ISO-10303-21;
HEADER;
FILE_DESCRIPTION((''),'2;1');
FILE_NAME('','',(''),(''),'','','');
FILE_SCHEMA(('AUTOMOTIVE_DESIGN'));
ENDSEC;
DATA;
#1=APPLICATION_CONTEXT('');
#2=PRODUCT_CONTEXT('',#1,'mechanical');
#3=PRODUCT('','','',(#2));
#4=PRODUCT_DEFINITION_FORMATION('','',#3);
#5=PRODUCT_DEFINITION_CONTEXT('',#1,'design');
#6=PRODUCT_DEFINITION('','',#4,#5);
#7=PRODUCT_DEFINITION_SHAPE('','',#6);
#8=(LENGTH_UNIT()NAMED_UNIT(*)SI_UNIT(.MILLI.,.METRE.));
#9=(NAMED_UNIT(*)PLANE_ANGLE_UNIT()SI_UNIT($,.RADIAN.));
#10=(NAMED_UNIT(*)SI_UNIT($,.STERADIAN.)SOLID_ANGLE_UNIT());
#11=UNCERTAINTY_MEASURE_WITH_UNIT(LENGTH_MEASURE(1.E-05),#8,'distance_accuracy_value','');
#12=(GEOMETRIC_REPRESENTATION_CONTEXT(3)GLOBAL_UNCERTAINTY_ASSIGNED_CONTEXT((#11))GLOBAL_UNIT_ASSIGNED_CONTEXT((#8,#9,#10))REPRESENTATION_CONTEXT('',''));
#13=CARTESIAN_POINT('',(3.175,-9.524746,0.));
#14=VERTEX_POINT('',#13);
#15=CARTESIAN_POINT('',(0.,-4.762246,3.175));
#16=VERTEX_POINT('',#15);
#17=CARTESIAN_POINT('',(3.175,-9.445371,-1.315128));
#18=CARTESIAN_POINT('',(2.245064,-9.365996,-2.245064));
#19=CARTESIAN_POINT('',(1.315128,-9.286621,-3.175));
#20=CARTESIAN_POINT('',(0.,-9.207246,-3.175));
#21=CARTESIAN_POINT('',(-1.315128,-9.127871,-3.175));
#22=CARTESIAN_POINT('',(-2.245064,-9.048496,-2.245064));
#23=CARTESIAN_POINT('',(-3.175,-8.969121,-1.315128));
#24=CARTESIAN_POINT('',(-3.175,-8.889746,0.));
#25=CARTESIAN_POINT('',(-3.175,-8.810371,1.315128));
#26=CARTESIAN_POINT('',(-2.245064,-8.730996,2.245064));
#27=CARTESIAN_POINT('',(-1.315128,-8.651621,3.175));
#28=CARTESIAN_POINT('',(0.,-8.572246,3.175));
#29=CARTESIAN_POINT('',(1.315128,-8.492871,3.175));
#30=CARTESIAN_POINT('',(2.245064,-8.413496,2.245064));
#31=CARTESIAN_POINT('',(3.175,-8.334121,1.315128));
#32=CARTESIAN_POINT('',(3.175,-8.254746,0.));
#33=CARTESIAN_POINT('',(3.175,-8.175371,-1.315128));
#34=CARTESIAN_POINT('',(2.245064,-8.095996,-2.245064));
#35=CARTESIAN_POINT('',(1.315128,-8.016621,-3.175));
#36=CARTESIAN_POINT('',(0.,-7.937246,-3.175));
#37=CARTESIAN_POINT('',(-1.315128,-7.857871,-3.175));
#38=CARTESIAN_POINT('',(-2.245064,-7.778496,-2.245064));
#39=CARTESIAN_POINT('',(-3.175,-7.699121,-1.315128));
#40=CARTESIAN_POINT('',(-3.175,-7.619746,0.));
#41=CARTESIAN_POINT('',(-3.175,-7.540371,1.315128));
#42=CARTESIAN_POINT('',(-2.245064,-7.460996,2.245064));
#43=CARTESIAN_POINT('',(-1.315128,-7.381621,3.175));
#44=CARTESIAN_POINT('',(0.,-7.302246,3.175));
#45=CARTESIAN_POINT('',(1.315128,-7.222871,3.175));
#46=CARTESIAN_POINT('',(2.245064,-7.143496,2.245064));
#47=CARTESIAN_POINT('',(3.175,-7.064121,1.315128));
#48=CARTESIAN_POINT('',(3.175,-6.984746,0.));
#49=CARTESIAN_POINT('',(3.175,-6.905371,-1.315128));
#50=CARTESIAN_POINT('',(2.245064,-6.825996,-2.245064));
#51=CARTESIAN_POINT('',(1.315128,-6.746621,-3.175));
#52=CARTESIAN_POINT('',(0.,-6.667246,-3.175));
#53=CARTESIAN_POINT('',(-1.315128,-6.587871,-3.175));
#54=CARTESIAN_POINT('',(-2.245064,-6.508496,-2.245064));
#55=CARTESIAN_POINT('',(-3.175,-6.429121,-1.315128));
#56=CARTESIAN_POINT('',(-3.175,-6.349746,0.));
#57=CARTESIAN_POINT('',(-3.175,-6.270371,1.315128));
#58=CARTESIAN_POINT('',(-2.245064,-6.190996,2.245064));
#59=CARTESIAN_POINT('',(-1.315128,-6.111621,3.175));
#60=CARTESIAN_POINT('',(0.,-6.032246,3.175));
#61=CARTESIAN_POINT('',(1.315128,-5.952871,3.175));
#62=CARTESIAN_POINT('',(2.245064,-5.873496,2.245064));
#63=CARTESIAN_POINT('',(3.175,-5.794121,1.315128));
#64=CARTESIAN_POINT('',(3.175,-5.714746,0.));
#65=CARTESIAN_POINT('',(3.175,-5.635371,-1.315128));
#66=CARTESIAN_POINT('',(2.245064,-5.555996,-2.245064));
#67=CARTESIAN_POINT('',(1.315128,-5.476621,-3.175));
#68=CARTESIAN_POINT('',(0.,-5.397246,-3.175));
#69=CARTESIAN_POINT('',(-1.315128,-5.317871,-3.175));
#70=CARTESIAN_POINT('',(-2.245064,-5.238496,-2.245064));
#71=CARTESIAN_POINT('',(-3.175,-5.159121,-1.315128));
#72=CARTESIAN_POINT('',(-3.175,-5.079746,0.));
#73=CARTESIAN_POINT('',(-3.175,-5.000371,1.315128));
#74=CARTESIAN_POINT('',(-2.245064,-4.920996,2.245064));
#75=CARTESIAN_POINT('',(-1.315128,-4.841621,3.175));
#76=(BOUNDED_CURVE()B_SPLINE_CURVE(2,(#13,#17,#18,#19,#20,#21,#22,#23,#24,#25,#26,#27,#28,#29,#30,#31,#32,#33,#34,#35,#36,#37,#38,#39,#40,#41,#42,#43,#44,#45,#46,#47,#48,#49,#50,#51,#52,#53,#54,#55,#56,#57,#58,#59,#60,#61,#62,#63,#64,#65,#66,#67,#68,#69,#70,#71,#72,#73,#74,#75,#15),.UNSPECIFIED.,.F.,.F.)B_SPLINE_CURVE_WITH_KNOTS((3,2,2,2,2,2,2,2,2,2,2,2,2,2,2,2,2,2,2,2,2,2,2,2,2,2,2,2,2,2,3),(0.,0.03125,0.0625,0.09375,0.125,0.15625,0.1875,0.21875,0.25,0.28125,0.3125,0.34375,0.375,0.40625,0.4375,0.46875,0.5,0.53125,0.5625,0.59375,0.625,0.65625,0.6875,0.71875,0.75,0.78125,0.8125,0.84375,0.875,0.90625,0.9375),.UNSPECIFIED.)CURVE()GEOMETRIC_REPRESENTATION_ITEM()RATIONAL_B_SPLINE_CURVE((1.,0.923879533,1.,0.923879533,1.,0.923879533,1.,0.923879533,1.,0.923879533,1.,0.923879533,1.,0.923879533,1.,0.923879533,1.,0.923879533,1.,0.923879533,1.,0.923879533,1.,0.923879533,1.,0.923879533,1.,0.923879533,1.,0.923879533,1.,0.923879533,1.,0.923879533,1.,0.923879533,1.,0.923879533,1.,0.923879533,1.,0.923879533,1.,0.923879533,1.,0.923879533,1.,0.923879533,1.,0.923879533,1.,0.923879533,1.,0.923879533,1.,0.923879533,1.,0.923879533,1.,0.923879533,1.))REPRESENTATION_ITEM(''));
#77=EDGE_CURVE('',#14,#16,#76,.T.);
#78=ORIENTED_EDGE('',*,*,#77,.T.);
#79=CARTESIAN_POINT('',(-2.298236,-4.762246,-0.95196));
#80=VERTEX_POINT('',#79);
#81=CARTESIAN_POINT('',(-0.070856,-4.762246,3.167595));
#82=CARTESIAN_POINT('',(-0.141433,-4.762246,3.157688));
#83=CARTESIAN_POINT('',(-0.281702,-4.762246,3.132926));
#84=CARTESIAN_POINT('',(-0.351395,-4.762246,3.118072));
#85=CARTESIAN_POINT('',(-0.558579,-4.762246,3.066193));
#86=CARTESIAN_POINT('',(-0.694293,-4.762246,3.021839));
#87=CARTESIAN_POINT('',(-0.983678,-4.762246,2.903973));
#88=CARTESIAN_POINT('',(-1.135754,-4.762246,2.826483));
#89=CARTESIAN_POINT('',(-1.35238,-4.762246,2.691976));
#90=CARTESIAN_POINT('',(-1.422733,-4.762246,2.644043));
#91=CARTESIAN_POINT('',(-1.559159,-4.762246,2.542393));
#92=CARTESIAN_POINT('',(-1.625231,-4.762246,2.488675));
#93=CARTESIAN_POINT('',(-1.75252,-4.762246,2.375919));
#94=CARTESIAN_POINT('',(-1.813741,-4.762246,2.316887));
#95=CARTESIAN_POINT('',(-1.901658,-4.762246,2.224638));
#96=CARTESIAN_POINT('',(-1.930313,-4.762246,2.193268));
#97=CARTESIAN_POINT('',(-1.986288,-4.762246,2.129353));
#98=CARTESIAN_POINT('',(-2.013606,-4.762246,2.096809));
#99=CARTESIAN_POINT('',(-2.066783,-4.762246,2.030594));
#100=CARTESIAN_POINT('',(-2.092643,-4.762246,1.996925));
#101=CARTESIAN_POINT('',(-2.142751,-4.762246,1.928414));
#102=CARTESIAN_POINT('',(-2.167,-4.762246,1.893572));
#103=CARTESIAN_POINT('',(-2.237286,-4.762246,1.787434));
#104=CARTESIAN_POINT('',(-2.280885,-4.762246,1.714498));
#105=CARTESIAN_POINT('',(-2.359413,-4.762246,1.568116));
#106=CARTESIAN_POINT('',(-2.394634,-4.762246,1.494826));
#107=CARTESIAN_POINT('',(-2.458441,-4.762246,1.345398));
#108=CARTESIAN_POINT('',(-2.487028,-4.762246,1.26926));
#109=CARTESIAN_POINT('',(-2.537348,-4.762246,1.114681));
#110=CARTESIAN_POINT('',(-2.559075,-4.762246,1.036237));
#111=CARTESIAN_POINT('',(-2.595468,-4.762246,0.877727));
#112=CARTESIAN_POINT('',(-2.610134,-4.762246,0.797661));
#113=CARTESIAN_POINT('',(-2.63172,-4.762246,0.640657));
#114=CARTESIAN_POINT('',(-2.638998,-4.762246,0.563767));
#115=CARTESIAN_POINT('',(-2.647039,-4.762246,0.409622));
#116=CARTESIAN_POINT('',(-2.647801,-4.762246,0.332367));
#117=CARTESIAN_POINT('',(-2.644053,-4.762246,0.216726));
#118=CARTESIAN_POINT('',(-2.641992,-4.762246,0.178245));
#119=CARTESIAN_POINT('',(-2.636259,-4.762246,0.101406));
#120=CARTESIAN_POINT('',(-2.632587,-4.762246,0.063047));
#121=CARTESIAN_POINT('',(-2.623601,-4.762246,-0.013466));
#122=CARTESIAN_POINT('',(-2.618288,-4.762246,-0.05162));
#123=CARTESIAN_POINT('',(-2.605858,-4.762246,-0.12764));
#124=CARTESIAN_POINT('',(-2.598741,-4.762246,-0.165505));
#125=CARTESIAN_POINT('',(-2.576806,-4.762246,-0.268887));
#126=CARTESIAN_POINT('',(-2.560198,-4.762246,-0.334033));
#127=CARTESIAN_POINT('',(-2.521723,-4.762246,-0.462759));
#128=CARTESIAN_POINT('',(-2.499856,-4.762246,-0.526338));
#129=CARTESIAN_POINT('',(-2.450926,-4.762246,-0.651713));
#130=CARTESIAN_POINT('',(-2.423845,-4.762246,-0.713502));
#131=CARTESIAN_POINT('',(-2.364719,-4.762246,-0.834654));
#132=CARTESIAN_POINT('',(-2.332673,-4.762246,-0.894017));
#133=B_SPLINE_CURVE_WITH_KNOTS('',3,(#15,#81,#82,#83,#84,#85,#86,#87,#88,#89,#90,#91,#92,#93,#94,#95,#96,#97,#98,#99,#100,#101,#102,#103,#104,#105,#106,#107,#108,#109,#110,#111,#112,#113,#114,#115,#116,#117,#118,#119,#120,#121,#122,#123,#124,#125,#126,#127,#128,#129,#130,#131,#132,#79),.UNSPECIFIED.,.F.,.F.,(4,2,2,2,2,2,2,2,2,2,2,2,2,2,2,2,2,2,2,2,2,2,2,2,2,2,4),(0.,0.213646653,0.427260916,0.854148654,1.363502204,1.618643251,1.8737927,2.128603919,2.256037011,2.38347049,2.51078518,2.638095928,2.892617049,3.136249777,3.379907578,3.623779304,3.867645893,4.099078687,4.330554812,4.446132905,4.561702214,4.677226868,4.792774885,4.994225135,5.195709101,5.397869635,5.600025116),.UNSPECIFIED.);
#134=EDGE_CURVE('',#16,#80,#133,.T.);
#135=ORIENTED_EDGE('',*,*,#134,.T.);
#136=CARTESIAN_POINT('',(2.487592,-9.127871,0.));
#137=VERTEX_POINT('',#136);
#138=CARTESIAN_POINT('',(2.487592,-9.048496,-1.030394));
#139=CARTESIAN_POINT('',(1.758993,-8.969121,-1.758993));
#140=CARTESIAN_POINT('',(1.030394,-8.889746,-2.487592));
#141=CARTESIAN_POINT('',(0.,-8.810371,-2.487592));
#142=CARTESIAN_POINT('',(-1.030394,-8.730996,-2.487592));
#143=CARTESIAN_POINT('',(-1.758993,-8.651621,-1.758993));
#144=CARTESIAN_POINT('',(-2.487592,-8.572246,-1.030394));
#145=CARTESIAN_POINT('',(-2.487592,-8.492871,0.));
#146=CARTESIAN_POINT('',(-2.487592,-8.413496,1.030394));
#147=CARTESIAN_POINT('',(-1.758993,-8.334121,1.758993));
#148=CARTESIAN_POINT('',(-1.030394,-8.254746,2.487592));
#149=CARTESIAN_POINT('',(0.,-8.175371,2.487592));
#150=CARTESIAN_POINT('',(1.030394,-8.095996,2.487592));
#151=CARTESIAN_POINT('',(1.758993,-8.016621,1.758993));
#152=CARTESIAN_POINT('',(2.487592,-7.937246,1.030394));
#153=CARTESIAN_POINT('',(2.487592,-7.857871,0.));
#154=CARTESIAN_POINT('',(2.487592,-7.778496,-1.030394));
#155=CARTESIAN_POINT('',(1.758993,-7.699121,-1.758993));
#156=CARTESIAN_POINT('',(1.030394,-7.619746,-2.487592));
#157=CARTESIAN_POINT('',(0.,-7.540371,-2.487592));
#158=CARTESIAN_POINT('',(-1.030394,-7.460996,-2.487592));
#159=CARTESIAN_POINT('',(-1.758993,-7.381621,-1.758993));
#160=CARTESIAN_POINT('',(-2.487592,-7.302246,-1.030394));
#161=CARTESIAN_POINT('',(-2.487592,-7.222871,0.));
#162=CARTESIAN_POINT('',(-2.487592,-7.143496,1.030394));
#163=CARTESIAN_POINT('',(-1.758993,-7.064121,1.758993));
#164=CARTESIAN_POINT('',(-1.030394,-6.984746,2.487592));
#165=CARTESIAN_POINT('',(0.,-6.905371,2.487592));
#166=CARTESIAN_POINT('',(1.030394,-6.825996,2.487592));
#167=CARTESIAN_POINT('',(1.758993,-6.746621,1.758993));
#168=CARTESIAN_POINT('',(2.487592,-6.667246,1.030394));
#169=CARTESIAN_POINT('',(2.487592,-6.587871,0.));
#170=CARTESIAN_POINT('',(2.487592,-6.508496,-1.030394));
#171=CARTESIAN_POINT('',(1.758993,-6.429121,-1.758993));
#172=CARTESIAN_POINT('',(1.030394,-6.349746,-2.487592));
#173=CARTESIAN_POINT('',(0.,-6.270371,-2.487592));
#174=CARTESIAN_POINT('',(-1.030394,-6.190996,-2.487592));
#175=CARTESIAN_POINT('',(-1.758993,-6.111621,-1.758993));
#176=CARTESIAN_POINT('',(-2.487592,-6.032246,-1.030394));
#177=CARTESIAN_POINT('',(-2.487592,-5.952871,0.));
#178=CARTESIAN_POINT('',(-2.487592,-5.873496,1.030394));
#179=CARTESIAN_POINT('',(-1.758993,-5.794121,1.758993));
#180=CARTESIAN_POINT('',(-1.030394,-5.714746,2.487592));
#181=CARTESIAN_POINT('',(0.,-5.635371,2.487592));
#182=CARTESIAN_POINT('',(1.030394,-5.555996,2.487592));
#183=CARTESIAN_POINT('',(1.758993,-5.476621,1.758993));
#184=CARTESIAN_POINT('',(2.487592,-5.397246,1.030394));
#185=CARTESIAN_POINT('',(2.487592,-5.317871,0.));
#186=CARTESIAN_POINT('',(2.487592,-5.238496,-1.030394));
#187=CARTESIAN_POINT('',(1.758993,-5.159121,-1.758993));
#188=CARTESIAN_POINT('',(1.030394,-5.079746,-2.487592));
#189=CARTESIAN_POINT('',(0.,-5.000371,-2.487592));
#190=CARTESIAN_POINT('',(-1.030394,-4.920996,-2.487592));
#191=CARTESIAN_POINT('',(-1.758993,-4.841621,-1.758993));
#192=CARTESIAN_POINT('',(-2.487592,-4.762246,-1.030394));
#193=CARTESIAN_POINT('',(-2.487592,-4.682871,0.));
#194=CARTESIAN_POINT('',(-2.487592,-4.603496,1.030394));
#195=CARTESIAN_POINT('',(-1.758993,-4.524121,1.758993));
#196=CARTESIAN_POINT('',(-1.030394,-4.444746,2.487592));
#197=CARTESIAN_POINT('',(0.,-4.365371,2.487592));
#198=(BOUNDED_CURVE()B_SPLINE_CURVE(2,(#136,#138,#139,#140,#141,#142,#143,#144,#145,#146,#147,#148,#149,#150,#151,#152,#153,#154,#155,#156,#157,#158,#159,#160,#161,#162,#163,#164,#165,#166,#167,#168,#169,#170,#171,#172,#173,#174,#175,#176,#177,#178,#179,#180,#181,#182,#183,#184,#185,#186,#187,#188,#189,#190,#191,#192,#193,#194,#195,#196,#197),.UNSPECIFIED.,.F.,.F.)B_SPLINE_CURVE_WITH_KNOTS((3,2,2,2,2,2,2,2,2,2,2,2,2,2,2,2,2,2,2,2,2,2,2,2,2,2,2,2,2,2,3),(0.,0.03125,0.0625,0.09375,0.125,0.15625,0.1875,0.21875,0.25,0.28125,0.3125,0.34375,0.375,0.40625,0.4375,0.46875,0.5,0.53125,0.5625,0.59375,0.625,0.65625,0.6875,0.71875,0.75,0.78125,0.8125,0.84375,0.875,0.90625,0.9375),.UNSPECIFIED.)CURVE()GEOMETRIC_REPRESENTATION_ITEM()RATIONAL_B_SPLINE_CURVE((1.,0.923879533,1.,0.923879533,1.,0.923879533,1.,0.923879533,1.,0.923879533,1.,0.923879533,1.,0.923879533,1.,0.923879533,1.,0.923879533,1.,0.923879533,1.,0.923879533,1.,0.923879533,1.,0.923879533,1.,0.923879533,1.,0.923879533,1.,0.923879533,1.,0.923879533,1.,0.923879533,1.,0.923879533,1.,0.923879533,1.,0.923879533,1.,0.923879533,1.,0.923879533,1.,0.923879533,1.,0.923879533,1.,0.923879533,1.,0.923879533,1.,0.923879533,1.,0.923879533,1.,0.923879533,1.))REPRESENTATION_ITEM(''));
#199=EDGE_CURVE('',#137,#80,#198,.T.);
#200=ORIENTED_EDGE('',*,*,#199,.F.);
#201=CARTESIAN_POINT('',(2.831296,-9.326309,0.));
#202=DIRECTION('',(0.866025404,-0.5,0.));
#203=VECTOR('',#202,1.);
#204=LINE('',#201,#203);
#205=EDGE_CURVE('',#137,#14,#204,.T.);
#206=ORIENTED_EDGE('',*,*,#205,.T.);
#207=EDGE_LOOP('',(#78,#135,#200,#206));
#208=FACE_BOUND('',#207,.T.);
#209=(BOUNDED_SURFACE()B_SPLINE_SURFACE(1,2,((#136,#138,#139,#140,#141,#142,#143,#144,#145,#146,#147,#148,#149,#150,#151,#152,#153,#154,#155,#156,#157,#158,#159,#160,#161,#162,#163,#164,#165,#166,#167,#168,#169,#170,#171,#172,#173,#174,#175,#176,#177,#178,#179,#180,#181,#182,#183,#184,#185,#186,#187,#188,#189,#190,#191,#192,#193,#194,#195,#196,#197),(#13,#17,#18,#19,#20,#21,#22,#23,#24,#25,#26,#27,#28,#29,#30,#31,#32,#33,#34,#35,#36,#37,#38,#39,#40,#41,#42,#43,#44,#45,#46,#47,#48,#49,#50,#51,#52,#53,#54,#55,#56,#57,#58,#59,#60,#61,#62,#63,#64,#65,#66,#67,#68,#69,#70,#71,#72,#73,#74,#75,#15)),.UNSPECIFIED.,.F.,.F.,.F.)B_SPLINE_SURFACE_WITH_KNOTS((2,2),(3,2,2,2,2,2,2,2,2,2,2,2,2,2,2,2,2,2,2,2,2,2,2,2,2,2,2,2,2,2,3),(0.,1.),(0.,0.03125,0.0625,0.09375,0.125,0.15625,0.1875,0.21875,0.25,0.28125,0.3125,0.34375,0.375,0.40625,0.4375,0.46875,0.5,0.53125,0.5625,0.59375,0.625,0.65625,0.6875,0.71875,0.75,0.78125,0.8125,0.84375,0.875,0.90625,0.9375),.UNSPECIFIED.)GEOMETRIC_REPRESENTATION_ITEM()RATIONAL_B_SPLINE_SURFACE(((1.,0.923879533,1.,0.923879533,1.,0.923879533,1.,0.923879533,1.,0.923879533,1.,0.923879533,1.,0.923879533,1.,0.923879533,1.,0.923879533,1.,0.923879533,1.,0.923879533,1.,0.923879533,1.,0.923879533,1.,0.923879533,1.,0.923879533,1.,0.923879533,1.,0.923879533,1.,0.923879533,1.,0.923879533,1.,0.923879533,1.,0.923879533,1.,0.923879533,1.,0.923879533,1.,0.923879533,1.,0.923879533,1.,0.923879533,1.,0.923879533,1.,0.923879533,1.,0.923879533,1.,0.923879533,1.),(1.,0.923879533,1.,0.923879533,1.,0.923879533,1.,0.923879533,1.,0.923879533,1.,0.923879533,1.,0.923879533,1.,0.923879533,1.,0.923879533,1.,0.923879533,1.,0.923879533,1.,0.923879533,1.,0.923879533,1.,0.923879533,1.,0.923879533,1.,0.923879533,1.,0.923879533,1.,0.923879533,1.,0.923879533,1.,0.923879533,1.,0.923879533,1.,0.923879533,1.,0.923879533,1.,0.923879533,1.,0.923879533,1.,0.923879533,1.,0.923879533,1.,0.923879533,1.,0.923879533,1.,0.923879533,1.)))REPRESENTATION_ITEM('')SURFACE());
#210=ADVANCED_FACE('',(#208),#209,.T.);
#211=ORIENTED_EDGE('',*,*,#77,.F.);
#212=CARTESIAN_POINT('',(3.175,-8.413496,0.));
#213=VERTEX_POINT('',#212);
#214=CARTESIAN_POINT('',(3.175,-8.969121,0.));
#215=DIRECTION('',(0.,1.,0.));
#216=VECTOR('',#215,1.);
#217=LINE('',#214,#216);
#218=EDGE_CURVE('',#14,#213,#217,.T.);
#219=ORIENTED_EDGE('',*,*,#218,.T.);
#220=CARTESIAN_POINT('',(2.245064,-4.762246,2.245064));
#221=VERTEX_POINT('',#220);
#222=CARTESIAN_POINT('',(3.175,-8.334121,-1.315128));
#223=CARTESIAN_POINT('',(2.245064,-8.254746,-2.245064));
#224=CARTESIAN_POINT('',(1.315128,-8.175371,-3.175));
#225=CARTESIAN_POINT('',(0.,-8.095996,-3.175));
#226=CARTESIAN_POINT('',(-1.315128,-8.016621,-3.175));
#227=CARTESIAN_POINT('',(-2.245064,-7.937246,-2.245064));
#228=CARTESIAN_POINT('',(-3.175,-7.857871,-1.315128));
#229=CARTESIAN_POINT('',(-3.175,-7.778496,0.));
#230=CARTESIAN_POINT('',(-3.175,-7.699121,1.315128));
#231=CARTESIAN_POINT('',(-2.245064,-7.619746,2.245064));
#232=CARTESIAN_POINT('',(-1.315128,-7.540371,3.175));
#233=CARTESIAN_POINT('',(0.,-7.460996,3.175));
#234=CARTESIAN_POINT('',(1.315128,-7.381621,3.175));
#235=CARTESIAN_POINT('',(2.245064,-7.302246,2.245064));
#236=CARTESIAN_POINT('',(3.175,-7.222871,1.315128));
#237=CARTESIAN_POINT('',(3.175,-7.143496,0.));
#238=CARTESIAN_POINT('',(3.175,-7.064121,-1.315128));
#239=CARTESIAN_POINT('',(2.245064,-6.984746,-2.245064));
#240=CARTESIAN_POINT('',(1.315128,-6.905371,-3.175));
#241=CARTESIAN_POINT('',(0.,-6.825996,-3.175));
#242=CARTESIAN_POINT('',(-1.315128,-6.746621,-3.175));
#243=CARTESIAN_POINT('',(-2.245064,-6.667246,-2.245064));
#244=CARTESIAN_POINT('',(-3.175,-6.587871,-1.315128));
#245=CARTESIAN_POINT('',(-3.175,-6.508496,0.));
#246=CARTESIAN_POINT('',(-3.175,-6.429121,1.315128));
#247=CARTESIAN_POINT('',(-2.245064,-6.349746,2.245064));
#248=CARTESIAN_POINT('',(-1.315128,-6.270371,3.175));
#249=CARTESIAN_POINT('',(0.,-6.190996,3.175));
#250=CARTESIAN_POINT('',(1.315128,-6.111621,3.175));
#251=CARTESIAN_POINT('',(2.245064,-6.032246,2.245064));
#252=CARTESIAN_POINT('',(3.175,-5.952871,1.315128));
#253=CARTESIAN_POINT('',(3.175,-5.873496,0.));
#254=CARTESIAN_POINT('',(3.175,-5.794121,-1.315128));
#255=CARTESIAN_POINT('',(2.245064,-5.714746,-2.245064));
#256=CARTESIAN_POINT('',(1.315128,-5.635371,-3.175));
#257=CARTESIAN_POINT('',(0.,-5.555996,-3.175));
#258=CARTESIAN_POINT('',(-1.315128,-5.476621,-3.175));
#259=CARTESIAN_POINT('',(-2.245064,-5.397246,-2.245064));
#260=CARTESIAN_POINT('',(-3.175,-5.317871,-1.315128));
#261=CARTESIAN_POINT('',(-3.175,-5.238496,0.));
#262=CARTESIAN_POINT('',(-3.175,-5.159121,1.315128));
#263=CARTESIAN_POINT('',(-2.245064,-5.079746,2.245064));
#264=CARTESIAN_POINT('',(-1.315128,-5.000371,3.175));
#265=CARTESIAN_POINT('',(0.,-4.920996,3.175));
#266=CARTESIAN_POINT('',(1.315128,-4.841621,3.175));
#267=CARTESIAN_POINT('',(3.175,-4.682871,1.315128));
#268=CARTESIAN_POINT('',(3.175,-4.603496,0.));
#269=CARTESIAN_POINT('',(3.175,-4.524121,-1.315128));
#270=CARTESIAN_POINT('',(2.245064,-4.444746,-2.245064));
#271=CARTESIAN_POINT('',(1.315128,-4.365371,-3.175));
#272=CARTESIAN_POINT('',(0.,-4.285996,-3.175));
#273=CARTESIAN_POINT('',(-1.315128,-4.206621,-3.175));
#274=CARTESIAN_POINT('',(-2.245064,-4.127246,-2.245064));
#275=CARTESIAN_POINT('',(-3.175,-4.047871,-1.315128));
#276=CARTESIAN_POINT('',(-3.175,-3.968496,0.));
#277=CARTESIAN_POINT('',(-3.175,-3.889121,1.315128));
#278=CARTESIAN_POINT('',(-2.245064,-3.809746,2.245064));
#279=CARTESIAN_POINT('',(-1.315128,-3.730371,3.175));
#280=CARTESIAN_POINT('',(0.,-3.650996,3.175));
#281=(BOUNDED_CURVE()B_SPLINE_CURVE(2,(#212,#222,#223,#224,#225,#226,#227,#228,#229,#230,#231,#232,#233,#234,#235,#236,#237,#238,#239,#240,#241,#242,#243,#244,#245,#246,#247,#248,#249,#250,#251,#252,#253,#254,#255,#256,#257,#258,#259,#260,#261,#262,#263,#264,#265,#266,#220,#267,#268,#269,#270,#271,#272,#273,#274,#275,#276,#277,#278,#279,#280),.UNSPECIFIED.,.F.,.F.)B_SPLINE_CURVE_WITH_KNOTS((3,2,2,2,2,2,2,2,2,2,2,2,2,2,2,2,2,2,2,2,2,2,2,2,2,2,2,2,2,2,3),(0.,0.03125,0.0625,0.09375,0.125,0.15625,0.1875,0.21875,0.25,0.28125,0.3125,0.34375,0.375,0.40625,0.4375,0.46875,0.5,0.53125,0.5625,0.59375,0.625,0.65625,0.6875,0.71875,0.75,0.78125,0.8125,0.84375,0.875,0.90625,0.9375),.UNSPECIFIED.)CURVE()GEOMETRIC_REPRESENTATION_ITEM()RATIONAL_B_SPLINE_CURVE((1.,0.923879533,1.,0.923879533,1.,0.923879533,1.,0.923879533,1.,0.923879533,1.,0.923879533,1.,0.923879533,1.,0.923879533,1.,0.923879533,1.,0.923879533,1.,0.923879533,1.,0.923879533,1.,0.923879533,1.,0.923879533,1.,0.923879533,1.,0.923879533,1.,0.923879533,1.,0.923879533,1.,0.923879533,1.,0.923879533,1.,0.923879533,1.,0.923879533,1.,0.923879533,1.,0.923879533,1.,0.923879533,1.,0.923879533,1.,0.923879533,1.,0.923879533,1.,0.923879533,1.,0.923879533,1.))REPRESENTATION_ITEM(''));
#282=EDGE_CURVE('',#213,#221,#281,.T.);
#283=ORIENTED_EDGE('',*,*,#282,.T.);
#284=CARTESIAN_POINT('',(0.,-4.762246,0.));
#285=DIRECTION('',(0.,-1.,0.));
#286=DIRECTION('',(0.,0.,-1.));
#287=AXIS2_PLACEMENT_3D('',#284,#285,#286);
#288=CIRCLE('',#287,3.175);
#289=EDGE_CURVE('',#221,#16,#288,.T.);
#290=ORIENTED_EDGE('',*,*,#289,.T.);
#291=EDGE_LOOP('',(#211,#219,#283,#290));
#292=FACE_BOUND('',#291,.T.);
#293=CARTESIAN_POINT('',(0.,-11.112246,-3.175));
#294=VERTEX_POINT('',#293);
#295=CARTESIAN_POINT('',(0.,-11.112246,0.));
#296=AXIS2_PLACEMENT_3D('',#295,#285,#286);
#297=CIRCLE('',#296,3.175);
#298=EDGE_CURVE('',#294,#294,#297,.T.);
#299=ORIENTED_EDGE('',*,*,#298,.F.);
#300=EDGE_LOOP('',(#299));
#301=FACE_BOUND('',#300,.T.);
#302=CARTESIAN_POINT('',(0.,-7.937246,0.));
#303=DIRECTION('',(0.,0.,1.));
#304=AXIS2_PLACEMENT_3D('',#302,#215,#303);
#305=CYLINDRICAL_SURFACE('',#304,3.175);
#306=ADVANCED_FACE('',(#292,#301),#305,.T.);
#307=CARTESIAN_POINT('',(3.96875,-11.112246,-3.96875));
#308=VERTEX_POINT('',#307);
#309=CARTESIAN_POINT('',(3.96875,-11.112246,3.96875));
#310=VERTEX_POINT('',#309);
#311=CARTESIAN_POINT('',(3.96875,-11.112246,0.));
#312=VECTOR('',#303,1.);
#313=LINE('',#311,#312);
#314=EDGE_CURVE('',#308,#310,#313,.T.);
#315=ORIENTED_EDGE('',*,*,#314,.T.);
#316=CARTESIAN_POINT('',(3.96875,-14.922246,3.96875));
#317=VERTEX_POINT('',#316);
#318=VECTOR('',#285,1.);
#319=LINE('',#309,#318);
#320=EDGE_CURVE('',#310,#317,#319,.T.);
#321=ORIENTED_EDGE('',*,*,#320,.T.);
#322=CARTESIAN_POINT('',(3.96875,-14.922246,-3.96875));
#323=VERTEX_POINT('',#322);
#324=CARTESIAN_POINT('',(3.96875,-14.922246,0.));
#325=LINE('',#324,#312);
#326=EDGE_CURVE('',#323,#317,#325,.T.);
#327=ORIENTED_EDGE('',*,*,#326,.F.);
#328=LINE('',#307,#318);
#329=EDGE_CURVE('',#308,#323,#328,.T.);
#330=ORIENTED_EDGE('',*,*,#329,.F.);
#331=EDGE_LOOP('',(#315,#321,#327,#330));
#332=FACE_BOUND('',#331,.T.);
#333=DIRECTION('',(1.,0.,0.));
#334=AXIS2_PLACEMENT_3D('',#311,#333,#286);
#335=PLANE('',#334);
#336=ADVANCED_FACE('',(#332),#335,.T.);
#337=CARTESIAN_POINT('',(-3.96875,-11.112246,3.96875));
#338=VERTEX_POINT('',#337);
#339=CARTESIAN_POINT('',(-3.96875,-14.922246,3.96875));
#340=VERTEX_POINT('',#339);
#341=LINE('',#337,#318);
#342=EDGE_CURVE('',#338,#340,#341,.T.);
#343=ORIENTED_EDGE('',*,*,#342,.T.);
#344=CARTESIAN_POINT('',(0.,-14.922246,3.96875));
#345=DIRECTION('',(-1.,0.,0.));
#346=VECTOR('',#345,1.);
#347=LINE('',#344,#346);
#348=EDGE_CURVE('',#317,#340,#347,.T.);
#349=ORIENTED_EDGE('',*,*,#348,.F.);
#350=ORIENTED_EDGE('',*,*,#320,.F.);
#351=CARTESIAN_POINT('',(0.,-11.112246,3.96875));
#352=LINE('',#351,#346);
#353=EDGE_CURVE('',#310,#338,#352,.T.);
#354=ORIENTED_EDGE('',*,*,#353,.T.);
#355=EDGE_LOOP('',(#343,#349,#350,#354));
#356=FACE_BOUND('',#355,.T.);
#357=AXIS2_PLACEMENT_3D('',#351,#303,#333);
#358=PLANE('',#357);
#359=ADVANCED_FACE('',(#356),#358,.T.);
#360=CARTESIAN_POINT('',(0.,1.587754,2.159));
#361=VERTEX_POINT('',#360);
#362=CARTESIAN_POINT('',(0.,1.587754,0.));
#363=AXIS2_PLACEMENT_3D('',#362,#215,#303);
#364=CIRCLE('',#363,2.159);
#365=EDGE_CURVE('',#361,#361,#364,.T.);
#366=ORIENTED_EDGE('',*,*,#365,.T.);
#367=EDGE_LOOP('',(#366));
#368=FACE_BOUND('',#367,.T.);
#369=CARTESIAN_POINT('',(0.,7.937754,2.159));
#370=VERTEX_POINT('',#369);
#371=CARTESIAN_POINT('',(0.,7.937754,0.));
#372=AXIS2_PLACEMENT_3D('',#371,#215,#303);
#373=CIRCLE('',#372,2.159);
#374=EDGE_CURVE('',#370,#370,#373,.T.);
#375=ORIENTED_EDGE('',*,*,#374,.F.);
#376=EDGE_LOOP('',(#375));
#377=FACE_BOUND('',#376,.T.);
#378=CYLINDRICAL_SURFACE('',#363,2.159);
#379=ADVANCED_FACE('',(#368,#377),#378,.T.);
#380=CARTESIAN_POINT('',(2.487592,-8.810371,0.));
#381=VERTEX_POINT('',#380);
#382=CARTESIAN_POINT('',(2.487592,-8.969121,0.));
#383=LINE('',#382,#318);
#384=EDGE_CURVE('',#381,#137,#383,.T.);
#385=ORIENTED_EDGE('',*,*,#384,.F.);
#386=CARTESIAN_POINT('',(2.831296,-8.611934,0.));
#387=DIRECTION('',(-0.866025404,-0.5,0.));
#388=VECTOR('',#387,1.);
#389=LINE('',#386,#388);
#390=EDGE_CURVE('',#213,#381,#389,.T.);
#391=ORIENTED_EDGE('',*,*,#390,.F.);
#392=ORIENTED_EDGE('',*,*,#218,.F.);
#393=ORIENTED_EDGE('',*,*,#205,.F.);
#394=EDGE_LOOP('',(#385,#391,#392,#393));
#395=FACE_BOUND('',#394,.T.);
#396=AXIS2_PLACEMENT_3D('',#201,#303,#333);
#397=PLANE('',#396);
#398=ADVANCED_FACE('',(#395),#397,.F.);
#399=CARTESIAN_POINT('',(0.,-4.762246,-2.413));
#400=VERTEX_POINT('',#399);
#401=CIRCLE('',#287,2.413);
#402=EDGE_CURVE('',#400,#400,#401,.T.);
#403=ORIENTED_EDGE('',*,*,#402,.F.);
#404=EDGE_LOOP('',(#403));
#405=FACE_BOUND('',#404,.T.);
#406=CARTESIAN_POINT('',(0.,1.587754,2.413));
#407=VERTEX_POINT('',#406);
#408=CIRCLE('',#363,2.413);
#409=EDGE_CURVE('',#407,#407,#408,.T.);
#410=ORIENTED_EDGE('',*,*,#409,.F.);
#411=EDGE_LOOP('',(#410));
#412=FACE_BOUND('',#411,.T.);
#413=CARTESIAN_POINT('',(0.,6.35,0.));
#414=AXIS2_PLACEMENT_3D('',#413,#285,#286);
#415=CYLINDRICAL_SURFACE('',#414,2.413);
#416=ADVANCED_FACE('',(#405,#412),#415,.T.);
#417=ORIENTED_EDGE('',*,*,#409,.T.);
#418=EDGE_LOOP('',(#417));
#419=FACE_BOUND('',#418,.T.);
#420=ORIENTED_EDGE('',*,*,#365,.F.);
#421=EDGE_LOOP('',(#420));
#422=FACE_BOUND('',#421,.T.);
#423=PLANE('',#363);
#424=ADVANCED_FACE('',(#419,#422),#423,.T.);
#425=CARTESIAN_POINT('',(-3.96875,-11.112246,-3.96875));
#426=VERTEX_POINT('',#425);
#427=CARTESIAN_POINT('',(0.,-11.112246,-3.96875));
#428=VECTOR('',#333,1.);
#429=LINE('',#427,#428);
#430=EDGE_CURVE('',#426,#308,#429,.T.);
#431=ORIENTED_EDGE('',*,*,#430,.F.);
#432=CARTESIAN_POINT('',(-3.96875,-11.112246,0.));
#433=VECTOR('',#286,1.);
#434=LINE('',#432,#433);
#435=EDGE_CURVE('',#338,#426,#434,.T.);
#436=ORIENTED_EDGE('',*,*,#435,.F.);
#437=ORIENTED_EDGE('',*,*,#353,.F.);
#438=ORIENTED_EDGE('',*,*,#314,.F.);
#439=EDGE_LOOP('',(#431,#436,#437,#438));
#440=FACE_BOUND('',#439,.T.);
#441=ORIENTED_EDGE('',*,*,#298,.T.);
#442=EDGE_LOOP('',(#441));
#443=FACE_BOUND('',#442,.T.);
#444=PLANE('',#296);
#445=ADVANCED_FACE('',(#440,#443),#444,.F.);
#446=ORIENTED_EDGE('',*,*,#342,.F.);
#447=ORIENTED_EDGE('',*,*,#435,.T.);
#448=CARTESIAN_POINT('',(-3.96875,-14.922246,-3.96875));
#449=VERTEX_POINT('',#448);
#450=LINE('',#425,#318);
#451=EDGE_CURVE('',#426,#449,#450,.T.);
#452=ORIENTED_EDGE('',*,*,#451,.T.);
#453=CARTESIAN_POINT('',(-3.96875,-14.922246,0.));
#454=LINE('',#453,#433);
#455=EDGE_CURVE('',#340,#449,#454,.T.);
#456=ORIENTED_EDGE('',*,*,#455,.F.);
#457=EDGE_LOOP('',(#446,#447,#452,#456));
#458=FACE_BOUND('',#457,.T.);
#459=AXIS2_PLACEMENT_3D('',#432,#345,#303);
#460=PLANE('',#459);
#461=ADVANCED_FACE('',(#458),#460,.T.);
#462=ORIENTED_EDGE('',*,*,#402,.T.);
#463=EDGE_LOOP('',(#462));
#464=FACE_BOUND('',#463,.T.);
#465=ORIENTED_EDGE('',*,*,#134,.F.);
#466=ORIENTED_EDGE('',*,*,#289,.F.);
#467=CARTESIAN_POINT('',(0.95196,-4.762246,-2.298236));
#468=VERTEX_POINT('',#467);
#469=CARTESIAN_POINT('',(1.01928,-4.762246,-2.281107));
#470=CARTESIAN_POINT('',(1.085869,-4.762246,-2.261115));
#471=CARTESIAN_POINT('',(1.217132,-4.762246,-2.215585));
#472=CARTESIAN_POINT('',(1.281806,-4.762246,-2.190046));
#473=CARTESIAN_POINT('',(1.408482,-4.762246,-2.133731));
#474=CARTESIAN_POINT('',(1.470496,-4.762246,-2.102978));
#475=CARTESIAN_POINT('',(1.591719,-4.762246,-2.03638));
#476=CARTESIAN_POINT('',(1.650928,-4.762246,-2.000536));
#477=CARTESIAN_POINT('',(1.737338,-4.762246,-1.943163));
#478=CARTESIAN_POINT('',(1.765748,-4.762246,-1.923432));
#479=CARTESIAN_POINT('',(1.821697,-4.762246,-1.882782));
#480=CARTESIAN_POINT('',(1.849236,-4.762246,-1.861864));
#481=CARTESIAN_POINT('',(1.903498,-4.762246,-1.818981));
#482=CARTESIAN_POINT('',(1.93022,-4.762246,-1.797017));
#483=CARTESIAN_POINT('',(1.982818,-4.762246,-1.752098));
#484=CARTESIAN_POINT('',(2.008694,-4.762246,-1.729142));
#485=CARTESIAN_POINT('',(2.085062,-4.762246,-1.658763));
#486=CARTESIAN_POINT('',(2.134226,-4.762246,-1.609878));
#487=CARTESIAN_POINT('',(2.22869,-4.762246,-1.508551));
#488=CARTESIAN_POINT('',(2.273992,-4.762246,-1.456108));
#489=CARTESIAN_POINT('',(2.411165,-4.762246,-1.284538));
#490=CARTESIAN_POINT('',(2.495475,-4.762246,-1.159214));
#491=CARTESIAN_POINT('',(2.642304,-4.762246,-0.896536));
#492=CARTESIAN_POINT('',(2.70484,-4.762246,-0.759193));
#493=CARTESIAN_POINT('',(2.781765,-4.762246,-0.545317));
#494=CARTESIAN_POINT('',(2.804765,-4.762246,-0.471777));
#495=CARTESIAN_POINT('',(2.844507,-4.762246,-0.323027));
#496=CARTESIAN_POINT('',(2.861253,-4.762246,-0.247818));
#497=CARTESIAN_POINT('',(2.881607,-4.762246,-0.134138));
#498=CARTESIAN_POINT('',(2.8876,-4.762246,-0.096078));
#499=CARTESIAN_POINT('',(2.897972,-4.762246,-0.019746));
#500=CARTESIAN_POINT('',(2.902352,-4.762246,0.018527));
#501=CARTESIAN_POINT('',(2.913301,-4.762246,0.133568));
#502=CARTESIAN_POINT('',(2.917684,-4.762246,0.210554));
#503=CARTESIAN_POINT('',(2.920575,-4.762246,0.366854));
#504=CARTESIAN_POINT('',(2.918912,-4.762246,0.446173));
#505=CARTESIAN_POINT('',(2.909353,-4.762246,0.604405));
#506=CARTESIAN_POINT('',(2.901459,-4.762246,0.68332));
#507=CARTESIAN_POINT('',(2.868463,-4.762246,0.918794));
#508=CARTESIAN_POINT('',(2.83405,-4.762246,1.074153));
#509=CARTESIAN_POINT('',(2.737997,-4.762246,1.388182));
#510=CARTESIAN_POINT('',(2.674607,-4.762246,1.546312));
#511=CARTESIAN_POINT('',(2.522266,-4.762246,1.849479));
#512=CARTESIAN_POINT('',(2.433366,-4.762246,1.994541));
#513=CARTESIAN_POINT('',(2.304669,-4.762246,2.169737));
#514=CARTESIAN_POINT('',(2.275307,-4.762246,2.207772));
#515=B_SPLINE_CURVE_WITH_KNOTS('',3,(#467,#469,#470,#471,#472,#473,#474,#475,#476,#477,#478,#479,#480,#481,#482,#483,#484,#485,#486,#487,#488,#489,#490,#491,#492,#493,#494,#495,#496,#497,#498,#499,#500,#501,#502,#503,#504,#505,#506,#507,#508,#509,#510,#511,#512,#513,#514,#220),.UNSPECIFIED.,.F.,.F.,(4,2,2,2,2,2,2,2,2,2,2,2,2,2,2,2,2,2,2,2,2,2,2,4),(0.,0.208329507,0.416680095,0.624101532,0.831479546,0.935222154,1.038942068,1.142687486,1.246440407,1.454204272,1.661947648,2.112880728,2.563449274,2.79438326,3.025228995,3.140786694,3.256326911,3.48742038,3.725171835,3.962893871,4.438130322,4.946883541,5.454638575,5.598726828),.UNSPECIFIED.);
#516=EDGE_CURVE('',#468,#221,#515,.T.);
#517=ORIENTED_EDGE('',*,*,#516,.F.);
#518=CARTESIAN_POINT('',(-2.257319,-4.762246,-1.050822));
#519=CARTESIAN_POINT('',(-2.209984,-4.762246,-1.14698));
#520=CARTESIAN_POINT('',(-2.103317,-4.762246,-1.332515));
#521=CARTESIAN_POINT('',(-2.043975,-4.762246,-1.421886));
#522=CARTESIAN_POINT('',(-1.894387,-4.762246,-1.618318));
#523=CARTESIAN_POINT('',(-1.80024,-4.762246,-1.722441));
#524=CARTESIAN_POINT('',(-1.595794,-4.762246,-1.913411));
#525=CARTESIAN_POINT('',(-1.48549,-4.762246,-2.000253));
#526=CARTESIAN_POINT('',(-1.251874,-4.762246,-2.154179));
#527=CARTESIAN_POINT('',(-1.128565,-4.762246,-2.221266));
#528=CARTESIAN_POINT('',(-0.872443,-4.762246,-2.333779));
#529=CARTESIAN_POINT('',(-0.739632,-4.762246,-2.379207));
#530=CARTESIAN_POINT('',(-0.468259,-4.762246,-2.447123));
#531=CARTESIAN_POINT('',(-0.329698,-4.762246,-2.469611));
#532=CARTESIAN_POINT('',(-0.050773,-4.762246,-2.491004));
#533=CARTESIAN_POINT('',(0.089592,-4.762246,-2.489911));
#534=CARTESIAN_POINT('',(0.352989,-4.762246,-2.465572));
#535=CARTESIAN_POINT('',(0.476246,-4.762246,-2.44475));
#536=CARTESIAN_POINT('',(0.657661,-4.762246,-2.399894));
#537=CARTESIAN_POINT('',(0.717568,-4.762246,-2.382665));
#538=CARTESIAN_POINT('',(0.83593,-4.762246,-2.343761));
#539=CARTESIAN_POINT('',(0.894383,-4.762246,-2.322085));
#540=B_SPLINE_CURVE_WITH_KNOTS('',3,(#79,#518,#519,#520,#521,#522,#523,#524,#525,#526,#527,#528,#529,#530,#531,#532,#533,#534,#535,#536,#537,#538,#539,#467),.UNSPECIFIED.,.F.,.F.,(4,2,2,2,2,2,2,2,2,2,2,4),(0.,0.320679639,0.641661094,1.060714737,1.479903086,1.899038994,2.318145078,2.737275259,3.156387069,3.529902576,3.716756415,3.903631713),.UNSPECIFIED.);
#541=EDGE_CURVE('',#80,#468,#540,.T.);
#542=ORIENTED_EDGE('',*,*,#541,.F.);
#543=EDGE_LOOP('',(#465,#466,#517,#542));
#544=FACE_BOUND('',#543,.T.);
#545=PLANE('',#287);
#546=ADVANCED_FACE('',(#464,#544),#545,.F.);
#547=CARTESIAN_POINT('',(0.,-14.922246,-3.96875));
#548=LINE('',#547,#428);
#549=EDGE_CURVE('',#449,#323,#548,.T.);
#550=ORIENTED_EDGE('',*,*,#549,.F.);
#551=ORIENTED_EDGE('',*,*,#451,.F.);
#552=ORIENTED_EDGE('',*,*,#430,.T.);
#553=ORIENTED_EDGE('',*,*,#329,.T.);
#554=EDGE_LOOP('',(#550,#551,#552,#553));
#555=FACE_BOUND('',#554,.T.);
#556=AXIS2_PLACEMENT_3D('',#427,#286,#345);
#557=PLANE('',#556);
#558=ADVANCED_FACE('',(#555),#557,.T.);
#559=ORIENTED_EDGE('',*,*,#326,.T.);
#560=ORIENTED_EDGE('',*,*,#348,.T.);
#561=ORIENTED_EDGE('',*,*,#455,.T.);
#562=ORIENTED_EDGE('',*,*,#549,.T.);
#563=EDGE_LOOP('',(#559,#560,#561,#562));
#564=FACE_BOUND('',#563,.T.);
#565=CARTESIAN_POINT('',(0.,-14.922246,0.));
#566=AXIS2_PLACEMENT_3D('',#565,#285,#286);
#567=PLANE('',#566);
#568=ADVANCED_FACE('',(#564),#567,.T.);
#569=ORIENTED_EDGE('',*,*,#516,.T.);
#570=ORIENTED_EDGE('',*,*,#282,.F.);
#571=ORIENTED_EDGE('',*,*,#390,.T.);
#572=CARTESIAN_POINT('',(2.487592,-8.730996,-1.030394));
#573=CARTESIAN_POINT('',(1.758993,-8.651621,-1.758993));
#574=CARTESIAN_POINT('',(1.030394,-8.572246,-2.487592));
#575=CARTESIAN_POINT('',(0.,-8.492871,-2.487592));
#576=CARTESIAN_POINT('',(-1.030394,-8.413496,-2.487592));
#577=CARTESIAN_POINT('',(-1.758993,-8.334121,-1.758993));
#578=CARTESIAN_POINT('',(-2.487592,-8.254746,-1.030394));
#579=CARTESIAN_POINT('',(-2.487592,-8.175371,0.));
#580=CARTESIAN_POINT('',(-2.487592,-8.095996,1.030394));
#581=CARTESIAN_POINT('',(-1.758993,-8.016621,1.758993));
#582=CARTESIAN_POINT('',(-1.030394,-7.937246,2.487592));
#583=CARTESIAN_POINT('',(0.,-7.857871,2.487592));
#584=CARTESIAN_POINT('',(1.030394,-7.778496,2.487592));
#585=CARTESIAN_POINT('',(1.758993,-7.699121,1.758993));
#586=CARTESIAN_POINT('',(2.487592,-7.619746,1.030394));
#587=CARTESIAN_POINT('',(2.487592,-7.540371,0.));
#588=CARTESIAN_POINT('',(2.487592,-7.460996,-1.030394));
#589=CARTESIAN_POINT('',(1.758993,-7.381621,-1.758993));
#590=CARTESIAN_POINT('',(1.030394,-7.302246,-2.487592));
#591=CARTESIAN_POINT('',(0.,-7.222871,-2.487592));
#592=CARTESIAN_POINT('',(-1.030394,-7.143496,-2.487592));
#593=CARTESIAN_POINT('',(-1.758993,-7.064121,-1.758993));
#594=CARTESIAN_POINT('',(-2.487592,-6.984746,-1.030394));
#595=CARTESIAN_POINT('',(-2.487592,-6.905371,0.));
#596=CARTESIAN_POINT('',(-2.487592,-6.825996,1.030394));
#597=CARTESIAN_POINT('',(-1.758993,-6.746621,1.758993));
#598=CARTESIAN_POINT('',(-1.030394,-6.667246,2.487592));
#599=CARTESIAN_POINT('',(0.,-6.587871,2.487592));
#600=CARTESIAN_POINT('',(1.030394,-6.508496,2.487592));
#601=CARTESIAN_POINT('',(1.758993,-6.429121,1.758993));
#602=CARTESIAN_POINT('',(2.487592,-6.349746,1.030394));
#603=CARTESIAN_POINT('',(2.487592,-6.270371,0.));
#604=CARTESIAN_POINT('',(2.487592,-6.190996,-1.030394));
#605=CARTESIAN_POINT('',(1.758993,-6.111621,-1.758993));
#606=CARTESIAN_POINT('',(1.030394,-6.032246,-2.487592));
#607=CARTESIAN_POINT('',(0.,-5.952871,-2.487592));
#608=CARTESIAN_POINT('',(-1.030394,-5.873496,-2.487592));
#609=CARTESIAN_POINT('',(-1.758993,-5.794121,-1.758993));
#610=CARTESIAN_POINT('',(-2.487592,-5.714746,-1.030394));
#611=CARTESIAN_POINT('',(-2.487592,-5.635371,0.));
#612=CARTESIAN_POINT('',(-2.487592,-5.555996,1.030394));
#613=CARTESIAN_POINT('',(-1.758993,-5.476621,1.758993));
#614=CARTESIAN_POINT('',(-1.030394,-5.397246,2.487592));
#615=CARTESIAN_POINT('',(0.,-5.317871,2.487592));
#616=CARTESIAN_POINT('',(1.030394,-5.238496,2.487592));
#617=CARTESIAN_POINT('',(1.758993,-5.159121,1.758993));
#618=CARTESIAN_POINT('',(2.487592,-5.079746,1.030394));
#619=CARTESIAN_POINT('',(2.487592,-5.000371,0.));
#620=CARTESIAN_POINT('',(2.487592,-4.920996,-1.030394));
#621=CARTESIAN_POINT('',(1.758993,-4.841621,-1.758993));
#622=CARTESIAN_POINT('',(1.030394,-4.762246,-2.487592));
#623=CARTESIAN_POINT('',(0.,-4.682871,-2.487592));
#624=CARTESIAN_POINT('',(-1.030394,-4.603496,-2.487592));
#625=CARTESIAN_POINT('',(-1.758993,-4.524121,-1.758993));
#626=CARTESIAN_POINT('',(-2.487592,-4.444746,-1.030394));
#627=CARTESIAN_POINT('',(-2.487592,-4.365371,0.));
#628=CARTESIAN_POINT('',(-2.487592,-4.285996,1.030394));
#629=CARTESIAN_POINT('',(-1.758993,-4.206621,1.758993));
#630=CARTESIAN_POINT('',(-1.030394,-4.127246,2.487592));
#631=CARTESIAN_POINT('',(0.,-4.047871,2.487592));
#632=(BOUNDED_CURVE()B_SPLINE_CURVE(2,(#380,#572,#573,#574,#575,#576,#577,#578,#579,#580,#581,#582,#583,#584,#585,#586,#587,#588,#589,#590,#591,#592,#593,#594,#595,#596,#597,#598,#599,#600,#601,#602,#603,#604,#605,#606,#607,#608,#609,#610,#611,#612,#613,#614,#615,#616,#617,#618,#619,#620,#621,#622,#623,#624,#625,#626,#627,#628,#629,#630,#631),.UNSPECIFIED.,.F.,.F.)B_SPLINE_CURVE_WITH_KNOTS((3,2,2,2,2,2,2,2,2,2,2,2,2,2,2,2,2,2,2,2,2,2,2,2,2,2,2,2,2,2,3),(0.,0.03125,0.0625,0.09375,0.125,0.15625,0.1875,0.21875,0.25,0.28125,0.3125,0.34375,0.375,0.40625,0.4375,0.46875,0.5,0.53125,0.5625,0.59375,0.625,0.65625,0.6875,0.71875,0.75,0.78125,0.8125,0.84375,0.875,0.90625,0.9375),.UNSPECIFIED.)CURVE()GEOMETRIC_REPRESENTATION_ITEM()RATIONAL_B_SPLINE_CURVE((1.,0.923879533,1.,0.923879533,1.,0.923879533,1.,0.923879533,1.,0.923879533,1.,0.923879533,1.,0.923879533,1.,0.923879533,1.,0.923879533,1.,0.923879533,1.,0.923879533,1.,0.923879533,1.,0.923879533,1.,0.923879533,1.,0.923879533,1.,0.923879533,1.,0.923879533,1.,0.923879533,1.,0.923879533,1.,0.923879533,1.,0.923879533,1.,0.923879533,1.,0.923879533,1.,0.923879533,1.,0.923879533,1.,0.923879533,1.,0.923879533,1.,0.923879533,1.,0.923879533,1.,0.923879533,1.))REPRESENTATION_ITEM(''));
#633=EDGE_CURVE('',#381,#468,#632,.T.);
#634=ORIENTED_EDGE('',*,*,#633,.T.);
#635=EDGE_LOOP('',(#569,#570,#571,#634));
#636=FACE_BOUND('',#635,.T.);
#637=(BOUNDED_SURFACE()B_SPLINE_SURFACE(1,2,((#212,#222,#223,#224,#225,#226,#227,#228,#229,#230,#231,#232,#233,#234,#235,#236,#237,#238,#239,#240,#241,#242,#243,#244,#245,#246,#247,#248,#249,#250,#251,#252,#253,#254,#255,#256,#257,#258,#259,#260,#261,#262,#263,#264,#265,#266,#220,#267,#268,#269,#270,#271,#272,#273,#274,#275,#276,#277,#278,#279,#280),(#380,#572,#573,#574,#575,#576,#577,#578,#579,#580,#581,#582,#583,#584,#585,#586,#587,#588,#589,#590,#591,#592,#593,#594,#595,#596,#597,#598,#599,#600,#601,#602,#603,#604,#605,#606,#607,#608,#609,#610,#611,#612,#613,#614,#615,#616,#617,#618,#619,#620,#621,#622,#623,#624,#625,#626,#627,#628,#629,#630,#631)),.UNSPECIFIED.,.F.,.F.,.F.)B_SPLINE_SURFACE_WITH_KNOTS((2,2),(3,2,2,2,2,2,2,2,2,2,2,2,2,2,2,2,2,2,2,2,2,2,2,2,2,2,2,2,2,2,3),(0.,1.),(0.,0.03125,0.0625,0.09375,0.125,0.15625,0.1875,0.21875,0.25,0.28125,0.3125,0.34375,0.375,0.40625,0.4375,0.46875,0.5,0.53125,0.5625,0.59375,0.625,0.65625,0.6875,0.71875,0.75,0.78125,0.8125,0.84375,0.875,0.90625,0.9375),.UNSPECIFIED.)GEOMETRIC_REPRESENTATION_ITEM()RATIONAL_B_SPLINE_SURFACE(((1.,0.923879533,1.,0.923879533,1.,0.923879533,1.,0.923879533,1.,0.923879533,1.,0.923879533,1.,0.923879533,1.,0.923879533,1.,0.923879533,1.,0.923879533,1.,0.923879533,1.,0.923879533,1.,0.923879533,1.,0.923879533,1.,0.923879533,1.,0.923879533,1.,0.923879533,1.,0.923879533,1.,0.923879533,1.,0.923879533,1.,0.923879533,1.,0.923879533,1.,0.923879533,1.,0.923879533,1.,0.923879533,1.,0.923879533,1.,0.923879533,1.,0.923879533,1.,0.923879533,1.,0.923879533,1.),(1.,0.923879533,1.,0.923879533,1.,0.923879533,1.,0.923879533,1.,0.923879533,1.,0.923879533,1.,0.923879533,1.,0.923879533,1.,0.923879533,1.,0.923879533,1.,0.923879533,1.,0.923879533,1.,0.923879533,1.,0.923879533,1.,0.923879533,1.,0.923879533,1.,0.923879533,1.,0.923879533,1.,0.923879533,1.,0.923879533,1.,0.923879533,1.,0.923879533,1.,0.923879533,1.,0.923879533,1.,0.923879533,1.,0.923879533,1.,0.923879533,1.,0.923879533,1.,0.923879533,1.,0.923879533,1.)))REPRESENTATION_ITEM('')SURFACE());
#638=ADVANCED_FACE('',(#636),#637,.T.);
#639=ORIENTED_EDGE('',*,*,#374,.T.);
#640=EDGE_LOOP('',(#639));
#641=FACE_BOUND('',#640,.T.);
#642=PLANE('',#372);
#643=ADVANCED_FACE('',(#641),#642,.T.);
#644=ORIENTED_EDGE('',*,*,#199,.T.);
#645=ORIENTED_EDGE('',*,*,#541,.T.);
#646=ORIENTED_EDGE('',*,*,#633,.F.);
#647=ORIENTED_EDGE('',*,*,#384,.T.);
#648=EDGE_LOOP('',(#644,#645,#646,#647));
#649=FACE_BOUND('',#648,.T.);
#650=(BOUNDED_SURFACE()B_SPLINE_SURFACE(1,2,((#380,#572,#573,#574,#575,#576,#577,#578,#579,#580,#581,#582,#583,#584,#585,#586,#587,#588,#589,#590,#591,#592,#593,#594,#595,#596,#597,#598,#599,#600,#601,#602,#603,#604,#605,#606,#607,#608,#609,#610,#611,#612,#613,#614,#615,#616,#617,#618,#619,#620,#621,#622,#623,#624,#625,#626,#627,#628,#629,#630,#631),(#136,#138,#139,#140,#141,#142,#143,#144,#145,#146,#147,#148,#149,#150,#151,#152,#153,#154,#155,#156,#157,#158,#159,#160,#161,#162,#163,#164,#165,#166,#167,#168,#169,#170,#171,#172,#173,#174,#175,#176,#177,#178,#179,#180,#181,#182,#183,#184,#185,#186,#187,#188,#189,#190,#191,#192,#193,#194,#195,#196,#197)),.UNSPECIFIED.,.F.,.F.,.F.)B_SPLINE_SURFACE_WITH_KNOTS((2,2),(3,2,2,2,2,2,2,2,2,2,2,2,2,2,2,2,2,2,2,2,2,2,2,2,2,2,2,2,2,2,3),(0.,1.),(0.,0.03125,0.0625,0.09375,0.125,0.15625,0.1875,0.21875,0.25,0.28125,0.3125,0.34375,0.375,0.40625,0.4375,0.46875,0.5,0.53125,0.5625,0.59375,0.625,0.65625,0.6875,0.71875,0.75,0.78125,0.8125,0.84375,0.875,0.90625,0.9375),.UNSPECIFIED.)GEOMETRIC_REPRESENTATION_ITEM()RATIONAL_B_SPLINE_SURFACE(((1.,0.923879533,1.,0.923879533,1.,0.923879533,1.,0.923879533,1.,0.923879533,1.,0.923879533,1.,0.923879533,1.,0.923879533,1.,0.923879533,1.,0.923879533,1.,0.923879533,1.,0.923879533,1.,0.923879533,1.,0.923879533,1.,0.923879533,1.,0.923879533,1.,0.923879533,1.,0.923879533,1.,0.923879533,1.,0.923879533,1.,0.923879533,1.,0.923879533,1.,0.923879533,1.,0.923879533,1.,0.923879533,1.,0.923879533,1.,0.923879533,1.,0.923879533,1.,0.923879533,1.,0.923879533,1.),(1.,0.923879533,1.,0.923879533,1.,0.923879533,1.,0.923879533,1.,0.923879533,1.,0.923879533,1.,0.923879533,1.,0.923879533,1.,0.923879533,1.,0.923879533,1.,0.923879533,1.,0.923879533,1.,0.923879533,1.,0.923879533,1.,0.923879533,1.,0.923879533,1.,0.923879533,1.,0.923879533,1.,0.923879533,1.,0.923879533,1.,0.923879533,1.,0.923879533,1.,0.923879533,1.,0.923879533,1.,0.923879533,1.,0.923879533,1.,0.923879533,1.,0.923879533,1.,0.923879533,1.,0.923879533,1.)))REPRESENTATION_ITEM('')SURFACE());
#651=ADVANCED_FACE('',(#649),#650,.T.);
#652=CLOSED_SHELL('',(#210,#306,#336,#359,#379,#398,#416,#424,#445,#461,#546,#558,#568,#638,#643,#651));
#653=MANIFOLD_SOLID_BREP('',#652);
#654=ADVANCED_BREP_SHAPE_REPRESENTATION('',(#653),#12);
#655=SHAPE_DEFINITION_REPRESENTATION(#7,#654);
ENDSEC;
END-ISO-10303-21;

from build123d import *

# Parameters (mm, degrees)
SKETCH1_R           = 2.413
BOSS_EXTRUDE1_DEPTH = 6.35
BOSS_EXTRUDE2_START = 4.762246
SKETCH2_R           = 2.413
BOSS_EXTRUDE2_DEPTH = 4.762246
SKETCH3_R           = 3.175
BOSS_EXTRUDE3_DEPTH = 3.175
SKETCH4_R           = 3.175
BOSS_EXTRUDE4_DEPTH = 3.175
THREAD2_PITCH       = 1.27
SKETCH11_R          = 6.35
BOSS_EXTRUDE5_DEPTH = 3.81
CUT_EXTRUDE1_START  = -0.952246
SKETCH13_R          = 2.413
CUT_EXTRUDE1_DEPTH  = 0.952246
SKETCH14_R          = 2.413
BOSS_EXTRUDE6_DEPTH = 2.54
SKETCH16_W          = 13.786641265
SKETCH16_H          = 13.864798174
SKETCH16_W_2        = 7.9375
SKETCH16_H_2        = 7.9375
CUT_EXTRUDE3_DEPTH  = 3.81
CUT_EXTRUDE4_START  = -6.35
SKETCH17_R          = 2.413
SKETCH17_R_2        = 2.159
CUT_EXTRUDE4_DEPTH  = 6.35


with BuildPart() as part:
    # Sketch1 → Boss-Extrude1 (new body)
    with BuildSketch(Plane(origin=(0, 0, 0), x_dir=(1, 0, 0), z_dir=(0, 1, 0))):
        with Locations(Location((0, 0, 0), (0, 0, 270))):
            Circle(SKETCH1_R)
    extrude(amount=BOSS_EXTRUDE1_DEPTH)

    # Sketch2 → Boss-Extrude2 (add)
    with BuildSketch(Plane(origin=(0, 0, 0), x_dir=(-1, 0, 0), z_dir=(0, -1, 0)).offset(BOSS_EXTRUDE2_START)):
        with Locations(Location((0, 0, 0), (0, 0, 90))):
            Circle(SKETCH2_R)
    extrude(amount=-BOSS_EXTRUDE2_DEPTH)

    # Sketch3 → Boss-Extrude3 (add)
    with BuildSketch(Plane(origin=(0, -4.762246, 0), x_dir=(-1, 0, 0), z_dir=(0, -1, 0))):
        with Locations(Location((0, 0, 0), (0, 0, 90))):
            Circle(SKETCH3_R)
    extrude(amount=BOSS_EXTRUDE3_DEPTH)

    # Sketch4 → Boss-Extrude4 (add)
    with BuildSketch(Plane(origin=(0, -7.937246, 0), x_dir=(-1, 0, 0), z_dir=(0, -1, 0))):
        with Locations(Location((0, 0, 0), (0, 0, 90))):
            Circle(SKETCH4_R)
    extrude(amount=BOSS_EXTRUDE4_DEPTH)

    # Thread2: the profile of Thread Profile3 profile screwed along a right-hand helix of 3.75 turns, 8 arcs to a turn; built about Z, then put on its axis
    thread2_z = Axis((0, 0, 0), (0, 0, 1))
    thread2_corners = [(3.1753, 0, -0.000173205), (3.1753, 0, 1.111423202), (2.487592339, 0, 0.714374998), (2.487592339, 0, 0.396874998)]
    with BuildLine(mode=Mode.PRIVATE) as thread2_profile:
        Line(thread2_corners[0], thread2_corners[1])
        Line(thread2_corners[1], thread2_corners[2])
        Line(thread2_corners[2], thread2_corners[3])
        Line(thread2_corners[3], thread2_corners[0])
    thread2_cap = Face(thread2_profile.wire())
    thread2_turn_angles = [0, 22.5, 45, 67.5, 90, 112.5, 135, 157.5, 180, 202.5, 225, 247.5, 270, 292.5, 315, 337.5, 360]
    thread2_turn_weights = [1, 0.9238795325112867, 1, 0.9238795325112867, 1, 0.9238795325112867, 1, 0.9238795325112867, 1, 0.9238795325112867, 1, 0.9238795325112867, 1, 0.9238795325112867, 1, 0.9238795325112867, 1]
    thread2_turn_rails = [Edge.make_bspline([Vector(p[0], p[1], 0).rotate(thread2_z, thread2_turn_angles[k]) / thread2_turn_weights[k] + Vector(0, 0, p[2] + THREAD2_PITCH * thread2_turn_angles[k] / 360) for k in range(17)], [0, 0, 0, 1, 1, 2, 2, 3, 3, 4, 4, 5, 5, 6, 6, 7, 7, 8, 8, 8], 2, thread2_turn_weights) for p in thread2_corners]
    thread2_turn_sides = [Face.make_surface_from_curves(thread2_turn_rails[p[0]], thread2_turn_rails[p[1]]) for p in [(0, 1), (1, 2), (2, 3), (3, 0)]]
    thread2_last_angles = [1080, 1102.5, 1125, 1147.5, 1170, 1192.5, 1215, 1237.5, 1260, 1282.5, 1305, 1327.5, 1350]
    thread2_last_weights = [1, 0.9238795325112867, 1, 0.9238795325112867, 1, 0.9238795325112867, 1, 0.9238795325112867, 1, 0.9238795325112867, 1, 0.9238795325112883, 1]
    thread2_last_rails = [Edge.make_bspline([Vector(p[0], p[1], 0).rotate(thread2_z, thread2_last_angles[k]) / thread2_last_weights[k] + Vector(0, 0, p[2] + THREAD2_PITCH * thread2_last_angles[k] / 360) for k in range(13)], [0, 0, 0, 1, 1, 2, 2, 3, 3, 4, 4, 5, 5, 6, 6, 6], 2, thread2_last_weights) for p in thread2_corners]
    thread2_last_sides = [Face.make_surface_from_curves(thread2_last_rails[p[0]], thread2_last_rails[p[1]]) for p in [(0, 1), (1, 2), (2, 3), (3, 0)]]
    thread2 = Plane(origin=(0, -9.524746, 0), x_dir=(1, 0, 0), z_dir=(0, 1, 0)) * Solid(Shell([*[p.moved(Location((0, 0, THREAD2_PITCH * i))) for i in range(3) for p in thread2_turn_sides], *thread2_last_sides, thread2_cap, thread2_cap.rotate(thread2_z, 1350).moved(Location((0, 0, THREAD2_PITCH * 1350 / 360)))]))
    add(thread2, mode=Mode.SUBTRACT)

    # Sketch11 → Boss-Extrude5 (add)
    with BuildSketch(Plane(origin=(0, -11.112246, 0), x_dir=(-1, 0, 0), z_dir=(0, -1, 0))):
        with Locations(Location((0, 0, 0), (0, 0, 270))):
            Circle(SKETCH11_R)
    extrude(amount=BOSS_EXTRUDE5_DEPTH)

    # Sketch13 → Cut-Extrude1 (cut)
    with BuildSketch(Plane(origin=(0, 6.35, 0), x_dir=(1, 0, 0), z_dir=(0, 1, 0)).offset(CUT_EXTRUDE1_START)):
        with Locations(Location((0, 0, 0), (0, 0, 90))):
            Circle(SKETCH13_R)
    extrude(amount=CUT_EXTRUDE1_DEPTH, mode=Mode.SUBTRACT)

    # Sketch14 → Boss-Extrude6 (add)
    with BuildSketch(Plane(origin=(0, 5.397754, 0), x_dir=(1, 0, 0), z_dir=(0, 1, 0))):
        with Locations(Location((0, 0, 0), (0, 0, 90))):
            Circle(SKETCH14_R)
    extrude(amount=BOSS_EXTRUDE6_DEPTH)

    # Sketch16 → Cut-Extrude3 (cut)
    with BuildSketch(Plane.XZ.offset(14.922246)):
        with Locations((-0.248819293, 0.124312734)):
            Rectangle(SKETCH16_W, SKETCH16_H)
        Rectangle(SKETCH16_W_2, SKETCH16_H_2, mode=Mode.SUBTRACT)
    extrude(amount=-CUT_EXTRUDE3_DEPTH, mode=Mode.SUBTRACT)

    # Sketch17 → Cut-Extrude4 (cut)
    with BuildSketch(Plane(origin=(0, 7.937754, 0), x_dir=(1, 0, 0), z_dir=(0, 1, 0)).offset(CUT_EXTRUDE4_START)):
        with Locations(Location((0, 0, 0), (0, 0, 90))):
            Circle(SKETCH17_R)
        with Locations(Location((0, 0, 0), (0, 0, 270))):
            Circle(SKETCH17_R_2, mode=Mode.SUBTRACT)
    extrude(amount=CUT_EXTRUDE4_DEPTH, mode=Mode.SUBTRACT)


solid = part.part
